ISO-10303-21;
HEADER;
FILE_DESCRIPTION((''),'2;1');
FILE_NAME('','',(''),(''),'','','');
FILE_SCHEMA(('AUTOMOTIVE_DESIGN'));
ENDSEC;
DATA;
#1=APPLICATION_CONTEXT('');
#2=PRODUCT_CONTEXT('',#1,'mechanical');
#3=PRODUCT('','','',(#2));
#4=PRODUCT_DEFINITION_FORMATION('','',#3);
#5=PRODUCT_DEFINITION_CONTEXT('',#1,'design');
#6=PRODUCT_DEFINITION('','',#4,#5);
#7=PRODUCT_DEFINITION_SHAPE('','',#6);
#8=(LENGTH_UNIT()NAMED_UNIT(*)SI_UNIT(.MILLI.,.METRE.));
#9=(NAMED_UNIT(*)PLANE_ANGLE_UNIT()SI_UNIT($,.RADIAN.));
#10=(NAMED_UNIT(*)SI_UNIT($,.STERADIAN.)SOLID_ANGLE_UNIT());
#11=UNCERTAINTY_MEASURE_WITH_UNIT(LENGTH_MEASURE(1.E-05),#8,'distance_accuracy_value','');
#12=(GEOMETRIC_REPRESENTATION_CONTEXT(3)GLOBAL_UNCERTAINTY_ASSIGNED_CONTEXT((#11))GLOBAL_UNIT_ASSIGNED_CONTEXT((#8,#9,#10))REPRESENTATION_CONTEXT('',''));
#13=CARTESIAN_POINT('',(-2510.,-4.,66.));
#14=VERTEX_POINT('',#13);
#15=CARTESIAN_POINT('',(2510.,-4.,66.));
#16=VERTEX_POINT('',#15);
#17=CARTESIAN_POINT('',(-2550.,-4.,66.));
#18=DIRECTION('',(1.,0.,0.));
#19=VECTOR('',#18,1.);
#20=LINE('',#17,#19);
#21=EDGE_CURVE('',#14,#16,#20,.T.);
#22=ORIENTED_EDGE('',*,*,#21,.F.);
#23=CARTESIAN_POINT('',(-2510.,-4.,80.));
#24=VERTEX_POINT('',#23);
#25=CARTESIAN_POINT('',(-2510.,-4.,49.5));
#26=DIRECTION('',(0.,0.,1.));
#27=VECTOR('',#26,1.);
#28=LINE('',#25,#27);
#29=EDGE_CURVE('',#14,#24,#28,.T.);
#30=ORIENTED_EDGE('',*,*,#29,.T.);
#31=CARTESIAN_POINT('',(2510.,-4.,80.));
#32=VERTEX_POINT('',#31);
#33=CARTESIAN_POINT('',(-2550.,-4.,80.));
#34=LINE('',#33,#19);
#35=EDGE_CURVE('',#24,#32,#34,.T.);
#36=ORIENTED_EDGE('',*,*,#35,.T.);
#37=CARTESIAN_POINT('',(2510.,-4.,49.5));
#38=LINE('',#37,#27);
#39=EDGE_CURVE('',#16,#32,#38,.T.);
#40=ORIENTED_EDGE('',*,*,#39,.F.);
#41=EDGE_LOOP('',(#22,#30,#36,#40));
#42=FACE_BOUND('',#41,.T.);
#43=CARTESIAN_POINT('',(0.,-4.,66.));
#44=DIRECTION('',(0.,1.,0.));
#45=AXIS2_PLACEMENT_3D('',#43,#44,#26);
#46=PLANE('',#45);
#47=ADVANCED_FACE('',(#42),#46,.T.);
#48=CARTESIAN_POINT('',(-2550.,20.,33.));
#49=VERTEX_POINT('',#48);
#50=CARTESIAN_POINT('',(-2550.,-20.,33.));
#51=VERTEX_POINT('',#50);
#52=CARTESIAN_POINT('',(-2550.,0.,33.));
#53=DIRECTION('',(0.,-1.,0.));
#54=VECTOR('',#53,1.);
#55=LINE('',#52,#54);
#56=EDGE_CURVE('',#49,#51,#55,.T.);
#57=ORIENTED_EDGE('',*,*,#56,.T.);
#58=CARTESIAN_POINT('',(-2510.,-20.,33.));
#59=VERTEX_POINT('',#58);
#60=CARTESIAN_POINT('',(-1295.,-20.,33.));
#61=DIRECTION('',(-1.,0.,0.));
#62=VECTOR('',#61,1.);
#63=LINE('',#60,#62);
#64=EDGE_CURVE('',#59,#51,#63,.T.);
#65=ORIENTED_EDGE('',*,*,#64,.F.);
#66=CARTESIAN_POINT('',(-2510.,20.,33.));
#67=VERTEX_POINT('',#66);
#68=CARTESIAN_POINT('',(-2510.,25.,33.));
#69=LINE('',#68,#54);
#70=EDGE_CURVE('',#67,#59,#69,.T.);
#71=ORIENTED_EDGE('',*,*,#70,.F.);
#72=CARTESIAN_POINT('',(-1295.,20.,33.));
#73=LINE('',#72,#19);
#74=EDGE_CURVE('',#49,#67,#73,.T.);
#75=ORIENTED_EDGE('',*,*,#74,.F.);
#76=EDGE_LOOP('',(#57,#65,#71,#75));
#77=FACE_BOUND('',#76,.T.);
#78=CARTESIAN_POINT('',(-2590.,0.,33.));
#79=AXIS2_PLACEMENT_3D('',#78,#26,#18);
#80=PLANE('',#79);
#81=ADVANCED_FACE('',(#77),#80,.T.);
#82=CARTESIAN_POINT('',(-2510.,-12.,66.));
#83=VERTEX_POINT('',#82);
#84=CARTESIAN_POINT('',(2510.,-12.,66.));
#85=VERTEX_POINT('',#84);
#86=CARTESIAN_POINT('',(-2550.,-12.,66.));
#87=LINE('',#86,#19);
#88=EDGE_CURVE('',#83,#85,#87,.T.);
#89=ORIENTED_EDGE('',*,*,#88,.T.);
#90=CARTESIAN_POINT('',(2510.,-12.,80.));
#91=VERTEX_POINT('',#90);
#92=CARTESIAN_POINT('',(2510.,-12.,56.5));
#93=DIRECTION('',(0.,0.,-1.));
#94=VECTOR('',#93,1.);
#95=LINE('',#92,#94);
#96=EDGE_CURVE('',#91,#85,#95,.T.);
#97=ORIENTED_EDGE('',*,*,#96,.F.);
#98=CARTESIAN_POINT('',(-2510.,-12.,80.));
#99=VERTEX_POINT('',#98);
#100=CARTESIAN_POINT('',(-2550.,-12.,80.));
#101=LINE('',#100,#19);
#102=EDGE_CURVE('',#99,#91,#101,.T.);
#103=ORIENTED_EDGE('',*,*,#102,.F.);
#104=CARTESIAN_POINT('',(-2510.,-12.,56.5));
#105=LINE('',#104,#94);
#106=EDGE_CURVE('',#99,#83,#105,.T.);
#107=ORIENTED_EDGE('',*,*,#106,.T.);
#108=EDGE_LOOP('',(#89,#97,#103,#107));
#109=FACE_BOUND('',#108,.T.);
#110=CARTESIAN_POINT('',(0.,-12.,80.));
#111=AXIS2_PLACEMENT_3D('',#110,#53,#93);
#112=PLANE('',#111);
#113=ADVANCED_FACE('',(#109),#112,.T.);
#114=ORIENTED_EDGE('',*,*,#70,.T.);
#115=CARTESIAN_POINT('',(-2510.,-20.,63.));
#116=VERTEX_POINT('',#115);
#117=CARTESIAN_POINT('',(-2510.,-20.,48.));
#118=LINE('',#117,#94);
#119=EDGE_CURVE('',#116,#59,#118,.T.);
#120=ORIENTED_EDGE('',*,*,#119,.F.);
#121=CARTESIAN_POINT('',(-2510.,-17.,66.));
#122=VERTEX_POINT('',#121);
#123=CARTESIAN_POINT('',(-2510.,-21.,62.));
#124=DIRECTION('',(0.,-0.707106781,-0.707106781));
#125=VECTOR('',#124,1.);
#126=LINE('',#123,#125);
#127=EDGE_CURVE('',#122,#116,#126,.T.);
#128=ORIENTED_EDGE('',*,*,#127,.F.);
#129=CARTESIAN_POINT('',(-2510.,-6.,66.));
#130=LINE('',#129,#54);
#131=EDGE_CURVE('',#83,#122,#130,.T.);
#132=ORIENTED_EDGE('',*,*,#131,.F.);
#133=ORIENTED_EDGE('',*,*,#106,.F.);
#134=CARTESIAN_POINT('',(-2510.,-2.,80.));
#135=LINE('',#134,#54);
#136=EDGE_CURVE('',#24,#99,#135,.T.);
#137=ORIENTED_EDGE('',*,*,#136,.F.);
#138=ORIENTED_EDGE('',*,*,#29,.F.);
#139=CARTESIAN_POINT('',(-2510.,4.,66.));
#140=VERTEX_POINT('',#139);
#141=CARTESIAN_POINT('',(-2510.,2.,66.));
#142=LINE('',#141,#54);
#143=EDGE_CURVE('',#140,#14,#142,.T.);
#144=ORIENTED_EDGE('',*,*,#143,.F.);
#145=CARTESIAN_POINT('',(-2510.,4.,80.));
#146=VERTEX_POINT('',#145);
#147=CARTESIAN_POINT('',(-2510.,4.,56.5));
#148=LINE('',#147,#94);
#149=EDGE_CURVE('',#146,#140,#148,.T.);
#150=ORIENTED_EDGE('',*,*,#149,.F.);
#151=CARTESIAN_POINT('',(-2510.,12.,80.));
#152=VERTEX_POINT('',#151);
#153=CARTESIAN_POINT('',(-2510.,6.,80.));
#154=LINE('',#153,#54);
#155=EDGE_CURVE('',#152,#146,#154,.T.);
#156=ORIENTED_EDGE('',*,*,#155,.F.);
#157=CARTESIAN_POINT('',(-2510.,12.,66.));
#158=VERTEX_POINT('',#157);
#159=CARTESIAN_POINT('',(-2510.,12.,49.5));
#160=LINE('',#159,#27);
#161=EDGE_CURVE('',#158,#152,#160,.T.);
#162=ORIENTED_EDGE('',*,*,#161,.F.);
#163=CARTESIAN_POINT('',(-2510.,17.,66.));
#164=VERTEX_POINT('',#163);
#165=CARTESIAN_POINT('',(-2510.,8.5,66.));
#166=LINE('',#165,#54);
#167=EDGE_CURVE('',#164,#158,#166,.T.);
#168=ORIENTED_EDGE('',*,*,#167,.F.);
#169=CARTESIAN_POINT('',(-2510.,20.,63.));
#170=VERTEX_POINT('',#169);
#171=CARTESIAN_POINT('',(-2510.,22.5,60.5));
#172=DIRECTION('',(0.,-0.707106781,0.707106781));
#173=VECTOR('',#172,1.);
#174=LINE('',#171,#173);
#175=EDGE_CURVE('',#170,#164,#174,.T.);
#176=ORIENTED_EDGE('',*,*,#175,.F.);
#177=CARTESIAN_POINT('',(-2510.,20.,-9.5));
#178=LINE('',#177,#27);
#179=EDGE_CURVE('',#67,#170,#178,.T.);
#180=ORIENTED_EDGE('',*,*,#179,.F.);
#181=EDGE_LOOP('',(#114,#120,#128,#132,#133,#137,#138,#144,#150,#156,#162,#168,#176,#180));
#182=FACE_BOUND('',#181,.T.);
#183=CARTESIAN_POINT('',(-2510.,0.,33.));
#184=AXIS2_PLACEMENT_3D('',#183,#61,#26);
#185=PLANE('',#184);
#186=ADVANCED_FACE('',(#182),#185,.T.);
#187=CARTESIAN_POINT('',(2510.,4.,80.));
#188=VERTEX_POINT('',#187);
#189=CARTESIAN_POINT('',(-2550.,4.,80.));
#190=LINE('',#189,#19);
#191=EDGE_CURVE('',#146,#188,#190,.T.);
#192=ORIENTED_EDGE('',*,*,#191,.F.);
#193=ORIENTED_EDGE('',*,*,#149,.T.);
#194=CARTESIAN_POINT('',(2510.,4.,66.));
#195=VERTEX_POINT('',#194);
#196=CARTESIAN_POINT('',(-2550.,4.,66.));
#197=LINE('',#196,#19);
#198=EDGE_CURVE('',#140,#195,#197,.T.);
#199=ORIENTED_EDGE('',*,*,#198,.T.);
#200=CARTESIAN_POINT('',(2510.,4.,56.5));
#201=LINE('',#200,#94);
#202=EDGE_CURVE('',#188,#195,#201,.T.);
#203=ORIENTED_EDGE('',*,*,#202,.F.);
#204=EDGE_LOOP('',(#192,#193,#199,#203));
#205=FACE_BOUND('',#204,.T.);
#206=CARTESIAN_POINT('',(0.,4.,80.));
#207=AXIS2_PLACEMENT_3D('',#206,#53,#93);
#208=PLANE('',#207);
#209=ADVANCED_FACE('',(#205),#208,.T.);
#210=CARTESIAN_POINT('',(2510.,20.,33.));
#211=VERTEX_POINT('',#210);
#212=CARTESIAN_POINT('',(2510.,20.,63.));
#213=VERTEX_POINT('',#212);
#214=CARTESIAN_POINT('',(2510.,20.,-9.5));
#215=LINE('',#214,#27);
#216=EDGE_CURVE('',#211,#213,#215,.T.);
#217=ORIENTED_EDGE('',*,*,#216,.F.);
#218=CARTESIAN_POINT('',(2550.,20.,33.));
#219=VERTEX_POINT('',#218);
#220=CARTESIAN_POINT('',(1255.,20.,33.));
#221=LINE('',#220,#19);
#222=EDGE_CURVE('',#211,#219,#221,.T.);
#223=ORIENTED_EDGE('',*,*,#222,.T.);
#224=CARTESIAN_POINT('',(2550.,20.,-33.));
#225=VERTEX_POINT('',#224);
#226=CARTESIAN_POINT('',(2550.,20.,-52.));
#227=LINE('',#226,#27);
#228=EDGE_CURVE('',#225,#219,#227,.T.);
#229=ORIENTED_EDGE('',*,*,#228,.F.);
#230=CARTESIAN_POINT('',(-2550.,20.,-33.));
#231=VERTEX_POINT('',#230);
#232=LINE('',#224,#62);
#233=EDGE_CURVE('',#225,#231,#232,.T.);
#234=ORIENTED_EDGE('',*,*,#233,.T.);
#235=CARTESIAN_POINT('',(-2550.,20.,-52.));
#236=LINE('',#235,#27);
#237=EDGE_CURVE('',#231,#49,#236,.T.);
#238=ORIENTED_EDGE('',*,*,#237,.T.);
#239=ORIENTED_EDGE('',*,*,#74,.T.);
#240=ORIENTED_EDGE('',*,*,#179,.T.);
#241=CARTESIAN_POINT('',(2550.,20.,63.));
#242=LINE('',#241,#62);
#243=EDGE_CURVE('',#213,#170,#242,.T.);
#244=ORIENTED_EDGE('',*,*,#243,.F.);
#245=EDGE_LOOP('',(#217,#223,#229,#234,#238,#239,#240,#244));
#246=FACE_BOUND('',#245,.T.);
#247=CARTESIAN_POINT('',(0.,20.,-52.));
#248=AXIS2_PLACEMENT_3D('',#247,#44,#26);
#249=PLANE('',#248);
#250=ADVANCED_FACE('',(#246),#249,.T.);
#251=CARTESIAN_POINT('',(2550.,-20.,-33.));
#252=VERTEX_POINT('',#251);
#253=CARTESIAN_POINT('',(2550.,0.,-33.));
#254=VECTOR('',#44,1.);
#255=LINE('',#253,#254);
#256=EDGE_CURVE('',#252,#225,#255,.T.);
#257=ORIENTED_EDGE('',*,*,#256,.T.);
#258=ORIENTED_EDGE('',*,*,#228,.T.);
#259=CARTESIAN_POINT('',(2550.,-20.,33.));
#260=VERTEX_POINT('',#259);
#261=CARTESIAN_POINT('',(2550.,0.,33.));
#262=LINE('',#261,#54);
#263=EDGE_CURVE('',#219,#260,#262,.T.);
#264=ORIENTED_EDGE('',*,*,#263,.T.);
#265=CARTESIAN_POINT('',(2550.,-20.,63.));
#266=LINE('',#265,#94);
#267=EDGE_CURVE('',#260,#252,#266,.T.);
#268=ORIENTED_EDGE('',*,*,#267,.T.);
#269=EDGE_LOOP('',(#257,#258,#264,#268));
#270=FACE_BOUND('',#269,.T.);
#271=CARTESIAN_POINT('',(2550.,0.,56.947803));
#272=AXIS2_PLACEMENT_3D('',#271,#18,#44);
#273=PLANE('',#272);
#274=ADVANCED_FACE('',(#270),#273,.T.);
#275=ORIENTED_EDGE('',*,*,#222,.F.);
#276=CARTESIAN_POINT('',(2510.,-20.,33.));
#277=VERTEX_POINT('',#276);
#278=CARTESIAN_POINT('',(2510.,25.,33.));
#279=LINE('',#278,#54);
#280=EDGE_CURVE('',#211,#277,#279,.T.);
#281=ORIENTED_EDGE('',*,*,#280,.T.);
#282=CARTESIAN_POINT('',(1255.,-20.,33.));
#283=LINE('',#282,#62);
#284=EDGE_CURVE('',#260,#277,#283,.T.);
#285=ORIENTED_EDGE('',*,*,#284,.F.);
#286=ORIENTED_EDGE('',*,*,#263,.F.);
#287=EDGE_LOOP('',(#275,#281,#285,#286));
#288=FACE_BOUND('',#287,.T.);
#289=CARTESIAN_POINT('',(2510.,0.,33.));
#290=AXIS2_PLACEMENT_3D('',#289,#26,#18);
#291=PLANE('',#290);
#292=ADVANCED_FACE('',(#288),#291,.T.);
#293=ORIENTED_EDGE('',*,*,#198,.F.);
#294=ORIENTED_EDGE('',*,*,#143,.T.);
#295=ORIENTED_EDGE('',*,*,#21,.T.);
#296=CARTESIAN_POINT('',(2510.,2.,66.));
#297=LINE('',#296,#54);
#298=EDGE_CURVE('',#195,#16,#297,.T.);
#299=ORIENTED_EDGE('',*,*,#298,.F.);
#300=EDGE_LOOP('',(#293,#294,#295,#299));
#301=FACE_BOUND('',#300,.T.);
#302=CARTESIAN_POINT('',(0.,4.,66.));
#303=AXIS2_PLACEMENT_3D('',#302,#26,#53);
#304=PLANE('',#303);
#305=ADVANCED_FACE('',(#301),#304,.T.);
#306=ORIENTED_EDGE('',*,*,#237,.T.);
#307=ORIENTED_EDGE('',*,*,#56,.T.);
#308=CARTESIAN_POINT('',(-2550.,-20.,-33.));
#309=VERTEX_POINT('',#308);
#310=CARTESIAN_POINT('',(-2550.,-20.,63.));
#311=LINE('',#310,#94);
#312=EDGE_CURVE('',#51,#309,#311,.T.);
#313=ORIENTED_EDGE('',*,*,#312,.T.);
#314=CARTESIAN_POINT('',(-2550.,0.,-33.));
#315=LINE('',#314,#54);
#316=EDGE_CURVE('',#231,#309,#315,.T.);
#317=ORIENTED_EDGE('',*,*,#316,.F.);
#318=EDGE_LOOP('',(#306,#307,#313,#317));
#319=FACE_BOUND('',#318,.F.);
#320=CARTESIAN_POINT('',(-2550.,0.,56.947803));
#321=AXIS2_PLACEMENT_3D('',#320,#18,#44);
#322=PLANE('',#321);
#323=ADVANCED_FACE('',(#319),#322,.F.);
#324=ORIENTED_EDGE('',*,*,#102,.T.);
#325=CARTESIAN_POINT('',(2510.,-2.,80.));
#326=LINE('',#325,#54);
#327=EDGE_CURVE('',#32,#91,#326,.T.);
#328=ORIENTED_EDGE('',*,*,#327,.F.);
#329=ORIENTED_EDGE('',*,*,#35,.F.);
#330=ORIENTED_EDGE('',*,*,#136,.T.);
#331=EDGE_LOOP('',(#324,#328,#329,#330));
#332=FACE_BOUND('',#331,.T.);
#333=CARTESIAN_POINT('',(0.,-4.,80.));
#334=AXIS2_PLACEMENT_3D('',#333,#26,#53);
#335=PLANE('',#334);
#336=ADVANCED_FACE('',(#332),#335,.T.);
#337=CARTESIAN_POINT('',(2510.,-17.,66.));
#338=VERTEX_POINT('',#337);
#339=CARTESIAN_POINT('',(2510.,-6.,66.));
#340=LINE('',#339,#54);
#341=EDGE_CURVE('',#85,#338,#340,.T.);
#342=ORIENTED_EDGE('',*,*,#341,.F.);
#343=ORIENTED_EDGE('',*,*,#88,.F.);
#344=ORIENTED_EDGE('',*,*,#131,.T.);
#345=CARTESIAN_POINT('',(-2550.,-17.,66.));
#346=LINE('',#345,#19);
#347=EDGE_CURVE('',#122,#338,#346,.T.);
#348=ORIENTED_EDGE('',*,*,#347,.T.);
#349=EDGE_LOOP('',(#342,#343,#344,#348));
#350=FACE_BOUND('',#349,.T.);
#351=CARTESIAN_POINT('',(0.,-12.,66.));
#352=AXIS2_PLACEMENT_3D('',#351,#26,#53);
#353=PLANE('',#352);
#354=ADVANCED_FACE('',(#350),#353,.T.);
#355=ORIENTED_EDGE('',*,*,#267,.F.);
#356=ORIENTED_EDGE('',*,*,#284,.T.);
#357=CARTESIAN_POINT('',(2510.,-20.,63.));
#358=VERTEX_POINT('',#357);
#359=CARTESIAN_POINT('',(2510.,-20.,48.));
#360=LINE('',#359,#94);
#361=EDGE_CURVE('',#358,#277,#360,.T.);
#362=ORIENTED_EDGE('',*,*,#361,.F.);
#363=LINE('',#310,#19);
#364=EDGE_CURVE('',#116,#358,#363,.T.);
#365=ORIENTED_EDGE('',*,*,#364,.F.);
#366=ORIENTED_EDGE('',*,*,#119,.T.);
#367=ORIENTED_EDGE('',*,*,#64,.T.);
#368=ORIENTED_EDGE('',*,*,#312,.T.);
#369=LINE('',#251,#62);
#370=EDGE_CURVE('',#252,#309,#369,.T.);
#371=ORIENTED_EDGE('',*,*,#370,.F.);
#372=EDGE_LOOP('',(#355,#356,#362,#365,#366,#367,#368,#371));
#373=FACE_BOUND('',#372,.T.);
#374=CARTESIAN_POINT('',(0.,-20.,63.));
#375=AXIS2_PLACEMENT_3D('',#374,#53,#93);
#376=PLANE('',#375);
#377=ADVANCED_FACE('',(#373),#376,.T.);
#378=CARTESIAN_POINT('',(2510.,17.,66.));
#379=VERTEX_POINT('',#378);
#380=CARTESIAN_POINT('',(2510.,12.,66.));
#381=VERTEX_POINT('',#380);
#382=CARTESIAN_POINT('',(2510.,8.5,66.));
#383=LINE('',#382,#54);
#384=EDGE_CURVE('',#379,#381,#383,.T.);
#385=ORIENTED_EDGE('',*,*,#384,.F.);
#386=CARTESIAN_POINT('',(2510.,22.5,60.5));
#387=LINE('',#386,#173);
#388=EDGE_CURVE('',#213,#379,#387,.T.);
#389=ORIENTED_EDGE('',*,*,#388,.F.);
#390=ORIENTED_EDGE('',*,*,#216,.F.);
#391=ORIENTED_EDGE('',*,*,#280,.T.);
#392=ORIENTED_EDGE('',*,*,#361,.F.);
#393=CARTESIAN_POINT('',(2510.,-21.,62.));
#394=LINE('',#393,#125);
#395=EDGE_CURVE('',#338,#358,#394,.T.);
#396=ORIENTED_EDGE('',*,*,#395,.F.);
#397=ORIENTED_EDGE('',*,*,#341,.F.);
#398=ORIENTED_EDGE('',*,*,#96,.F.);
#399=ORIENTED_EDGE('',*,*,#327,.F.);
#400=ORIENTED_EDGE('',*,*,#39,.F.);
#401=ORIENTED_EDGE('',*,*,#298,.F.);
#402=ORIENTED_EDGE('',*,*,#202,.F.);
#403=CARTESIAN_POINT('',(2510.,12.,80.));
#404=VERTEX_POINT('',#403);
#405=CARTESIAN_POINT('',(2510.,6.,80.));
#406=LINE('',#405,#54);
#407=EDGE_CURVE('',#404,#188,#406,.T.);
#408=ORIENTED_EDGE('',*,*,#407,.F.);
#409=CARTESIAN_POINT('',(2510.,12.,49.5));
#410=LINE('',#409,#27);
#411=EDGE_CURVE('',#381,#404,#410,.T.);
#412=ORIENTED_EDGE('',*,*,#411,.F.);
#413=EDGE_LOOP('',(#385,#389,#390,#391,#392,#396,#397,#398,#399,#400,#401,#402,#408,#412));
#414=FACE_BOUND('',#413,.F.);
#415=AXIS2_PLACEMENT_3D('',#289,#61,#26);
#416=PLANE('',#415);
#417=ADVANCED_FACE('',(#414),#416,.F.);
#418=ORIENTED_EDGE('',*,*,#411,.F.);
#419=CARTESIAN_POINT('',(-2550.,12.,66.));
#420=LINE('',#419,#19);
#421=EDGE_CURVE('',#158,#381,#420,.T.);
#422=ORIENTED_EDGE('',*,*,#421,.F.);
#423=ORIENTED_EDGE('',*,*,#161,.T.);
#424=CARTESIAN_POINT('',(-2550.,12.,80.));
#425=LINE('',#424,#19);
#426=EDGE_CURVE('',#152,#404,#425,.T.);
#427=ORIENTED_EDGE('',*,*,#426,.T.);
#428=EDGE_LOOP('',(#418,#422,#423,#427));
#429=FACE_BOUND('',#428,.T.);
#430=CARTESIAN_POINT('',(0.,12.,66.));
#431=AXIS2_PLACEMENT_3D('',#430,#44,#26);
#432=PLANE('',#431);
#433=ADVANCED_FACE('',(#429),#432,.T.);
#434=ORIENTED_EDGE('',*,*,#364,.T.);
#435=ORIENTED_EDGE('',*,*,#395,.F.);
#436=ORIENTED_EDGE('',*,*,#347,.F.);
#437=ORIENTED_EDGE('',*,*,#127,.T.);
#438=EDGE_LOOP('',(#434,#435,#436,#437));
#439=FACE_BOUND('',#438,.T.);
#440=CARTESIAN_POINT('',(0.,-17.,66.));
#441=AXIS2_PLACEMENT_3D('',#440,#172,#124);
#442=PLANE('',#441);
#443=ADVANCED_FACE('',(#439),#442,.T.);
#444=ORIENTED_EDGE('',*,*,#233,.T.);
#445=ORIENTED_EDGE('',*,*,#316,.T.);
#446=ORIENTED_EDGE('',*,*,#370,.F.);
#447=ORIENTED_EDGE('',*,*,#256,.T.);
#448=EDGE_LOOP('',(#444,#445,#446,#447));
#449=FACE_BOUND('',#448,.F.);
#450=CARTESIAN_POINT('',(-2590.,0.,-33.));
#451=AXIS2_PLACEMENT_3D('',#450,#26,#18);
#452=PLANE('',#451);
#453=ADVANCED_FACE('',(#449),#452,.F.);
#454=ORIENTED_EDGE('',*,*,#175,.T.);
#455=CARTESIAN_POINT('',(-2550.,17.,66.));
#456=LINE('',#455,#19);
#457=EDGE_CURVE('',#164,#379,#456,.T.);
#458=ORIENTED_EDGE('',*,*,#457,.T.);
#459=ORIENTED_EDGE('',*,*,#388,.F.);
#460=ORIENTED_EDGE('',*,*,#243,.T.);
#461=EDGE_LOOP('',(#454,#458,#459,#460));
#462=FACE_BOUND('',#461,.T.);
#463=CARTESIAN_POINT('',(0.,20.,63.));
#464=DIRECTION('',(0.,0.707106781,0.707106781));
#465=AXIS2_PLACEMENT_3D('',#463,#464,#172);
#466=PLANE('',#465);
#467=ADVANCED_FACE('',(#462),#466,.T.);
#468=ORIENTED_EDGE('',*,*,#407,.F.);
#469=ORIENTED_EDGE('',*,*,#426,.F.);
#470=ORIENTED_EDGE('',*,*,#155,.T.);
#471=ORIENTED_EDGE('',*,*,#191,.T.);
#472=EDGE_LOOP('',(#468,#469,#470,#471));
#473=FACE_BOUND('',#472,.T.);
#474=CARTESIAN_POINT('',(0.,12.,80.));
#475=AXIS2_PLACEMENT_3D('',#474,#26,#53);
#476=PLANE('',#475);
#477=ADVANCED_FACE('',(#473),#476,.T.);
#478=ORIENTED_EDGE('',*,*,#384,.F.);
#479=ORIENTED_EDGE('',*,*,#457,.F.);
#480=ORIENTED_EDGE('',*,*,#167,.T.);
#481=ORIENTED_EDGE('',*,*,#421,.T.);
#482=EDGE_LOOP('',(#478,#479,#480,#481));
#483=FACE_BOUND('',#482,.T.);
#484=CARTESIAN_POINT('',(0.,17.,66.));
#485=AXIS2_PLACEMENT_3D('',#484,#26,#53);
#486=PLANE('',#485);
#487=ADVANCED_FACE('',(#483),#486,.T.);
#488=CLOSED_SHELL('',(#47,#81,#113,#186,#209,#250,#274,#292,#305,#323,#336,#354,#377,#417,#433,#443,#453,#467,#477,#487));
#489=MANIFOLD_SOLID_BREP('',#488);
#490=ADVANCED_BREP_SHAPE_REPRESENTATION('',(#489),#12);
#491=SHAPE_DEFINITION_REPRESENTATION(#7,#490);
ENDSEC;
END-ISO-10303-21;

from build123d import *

# Parameters (mm, degrees)
F1_W     = 40
F1_H     = 33
F3_DEPTH = 2550
F2_W     = 80
F2_H     = 100
F4_DEPTH = 25
F5_W     = 5020
F5_H     = 19
F6_DEPTH = 40


with BuildPart() as f3:
    # F1 (on Right) → F3 (new body, symmetric)
    with BuildSketch(Plane.YZ):
        Polygon((20, 33), (20, 63), (17, 66), (12, 66), (12, 80), (4, 80), (4, 66), (-4, 66), (-4, 80), (-12, 80), (-12, 66), (-17, 66), (-20, 63), (-20, 33), align=None)
        with Locations((0, 16.5)):
            Rectangle(F1_W, F1_H)
        with Locations((0, -16.5)):
            Rectangle(F1_W, F1_H)
        Polygon((20, -52), (20, -33), (-20, -33), (-20, -52), (-12, -52), (-4, -52), (4, -52), (12, -52), align=None)
    extrude(amount=F3_DEPTH, both=True)

    # F2 (on Front) → F4 (cut, symmetric)
    with BuildSketch(Plane.XZ):
        with Locations((-2550, 83)):
            Rectangle(F2_W, F2_H)
        with Locations((-2550, -83)):
            Rectangle(F2_W, F2_H)
        with Locations((2550, 83)):
            Rectangle(F2_W, F2_H)
        with Locations((2550, -83)):
            Rectangle(F2_W, F2_H)
    extrude(amount=F4_DEPTH, both=True, mode=Mode.SUBTRACT)

    # F5 (on face) → F6 (cut, through all)
    with BuildSketch(Plane.XZ.offset(20)):
        with Locations((0, -42.5)):
            Rectangle(F5_W, F5_H)
    extrude(amount=-F6_DEPTH, mode=Mode.SUBTRACT)


solid = f3.part
